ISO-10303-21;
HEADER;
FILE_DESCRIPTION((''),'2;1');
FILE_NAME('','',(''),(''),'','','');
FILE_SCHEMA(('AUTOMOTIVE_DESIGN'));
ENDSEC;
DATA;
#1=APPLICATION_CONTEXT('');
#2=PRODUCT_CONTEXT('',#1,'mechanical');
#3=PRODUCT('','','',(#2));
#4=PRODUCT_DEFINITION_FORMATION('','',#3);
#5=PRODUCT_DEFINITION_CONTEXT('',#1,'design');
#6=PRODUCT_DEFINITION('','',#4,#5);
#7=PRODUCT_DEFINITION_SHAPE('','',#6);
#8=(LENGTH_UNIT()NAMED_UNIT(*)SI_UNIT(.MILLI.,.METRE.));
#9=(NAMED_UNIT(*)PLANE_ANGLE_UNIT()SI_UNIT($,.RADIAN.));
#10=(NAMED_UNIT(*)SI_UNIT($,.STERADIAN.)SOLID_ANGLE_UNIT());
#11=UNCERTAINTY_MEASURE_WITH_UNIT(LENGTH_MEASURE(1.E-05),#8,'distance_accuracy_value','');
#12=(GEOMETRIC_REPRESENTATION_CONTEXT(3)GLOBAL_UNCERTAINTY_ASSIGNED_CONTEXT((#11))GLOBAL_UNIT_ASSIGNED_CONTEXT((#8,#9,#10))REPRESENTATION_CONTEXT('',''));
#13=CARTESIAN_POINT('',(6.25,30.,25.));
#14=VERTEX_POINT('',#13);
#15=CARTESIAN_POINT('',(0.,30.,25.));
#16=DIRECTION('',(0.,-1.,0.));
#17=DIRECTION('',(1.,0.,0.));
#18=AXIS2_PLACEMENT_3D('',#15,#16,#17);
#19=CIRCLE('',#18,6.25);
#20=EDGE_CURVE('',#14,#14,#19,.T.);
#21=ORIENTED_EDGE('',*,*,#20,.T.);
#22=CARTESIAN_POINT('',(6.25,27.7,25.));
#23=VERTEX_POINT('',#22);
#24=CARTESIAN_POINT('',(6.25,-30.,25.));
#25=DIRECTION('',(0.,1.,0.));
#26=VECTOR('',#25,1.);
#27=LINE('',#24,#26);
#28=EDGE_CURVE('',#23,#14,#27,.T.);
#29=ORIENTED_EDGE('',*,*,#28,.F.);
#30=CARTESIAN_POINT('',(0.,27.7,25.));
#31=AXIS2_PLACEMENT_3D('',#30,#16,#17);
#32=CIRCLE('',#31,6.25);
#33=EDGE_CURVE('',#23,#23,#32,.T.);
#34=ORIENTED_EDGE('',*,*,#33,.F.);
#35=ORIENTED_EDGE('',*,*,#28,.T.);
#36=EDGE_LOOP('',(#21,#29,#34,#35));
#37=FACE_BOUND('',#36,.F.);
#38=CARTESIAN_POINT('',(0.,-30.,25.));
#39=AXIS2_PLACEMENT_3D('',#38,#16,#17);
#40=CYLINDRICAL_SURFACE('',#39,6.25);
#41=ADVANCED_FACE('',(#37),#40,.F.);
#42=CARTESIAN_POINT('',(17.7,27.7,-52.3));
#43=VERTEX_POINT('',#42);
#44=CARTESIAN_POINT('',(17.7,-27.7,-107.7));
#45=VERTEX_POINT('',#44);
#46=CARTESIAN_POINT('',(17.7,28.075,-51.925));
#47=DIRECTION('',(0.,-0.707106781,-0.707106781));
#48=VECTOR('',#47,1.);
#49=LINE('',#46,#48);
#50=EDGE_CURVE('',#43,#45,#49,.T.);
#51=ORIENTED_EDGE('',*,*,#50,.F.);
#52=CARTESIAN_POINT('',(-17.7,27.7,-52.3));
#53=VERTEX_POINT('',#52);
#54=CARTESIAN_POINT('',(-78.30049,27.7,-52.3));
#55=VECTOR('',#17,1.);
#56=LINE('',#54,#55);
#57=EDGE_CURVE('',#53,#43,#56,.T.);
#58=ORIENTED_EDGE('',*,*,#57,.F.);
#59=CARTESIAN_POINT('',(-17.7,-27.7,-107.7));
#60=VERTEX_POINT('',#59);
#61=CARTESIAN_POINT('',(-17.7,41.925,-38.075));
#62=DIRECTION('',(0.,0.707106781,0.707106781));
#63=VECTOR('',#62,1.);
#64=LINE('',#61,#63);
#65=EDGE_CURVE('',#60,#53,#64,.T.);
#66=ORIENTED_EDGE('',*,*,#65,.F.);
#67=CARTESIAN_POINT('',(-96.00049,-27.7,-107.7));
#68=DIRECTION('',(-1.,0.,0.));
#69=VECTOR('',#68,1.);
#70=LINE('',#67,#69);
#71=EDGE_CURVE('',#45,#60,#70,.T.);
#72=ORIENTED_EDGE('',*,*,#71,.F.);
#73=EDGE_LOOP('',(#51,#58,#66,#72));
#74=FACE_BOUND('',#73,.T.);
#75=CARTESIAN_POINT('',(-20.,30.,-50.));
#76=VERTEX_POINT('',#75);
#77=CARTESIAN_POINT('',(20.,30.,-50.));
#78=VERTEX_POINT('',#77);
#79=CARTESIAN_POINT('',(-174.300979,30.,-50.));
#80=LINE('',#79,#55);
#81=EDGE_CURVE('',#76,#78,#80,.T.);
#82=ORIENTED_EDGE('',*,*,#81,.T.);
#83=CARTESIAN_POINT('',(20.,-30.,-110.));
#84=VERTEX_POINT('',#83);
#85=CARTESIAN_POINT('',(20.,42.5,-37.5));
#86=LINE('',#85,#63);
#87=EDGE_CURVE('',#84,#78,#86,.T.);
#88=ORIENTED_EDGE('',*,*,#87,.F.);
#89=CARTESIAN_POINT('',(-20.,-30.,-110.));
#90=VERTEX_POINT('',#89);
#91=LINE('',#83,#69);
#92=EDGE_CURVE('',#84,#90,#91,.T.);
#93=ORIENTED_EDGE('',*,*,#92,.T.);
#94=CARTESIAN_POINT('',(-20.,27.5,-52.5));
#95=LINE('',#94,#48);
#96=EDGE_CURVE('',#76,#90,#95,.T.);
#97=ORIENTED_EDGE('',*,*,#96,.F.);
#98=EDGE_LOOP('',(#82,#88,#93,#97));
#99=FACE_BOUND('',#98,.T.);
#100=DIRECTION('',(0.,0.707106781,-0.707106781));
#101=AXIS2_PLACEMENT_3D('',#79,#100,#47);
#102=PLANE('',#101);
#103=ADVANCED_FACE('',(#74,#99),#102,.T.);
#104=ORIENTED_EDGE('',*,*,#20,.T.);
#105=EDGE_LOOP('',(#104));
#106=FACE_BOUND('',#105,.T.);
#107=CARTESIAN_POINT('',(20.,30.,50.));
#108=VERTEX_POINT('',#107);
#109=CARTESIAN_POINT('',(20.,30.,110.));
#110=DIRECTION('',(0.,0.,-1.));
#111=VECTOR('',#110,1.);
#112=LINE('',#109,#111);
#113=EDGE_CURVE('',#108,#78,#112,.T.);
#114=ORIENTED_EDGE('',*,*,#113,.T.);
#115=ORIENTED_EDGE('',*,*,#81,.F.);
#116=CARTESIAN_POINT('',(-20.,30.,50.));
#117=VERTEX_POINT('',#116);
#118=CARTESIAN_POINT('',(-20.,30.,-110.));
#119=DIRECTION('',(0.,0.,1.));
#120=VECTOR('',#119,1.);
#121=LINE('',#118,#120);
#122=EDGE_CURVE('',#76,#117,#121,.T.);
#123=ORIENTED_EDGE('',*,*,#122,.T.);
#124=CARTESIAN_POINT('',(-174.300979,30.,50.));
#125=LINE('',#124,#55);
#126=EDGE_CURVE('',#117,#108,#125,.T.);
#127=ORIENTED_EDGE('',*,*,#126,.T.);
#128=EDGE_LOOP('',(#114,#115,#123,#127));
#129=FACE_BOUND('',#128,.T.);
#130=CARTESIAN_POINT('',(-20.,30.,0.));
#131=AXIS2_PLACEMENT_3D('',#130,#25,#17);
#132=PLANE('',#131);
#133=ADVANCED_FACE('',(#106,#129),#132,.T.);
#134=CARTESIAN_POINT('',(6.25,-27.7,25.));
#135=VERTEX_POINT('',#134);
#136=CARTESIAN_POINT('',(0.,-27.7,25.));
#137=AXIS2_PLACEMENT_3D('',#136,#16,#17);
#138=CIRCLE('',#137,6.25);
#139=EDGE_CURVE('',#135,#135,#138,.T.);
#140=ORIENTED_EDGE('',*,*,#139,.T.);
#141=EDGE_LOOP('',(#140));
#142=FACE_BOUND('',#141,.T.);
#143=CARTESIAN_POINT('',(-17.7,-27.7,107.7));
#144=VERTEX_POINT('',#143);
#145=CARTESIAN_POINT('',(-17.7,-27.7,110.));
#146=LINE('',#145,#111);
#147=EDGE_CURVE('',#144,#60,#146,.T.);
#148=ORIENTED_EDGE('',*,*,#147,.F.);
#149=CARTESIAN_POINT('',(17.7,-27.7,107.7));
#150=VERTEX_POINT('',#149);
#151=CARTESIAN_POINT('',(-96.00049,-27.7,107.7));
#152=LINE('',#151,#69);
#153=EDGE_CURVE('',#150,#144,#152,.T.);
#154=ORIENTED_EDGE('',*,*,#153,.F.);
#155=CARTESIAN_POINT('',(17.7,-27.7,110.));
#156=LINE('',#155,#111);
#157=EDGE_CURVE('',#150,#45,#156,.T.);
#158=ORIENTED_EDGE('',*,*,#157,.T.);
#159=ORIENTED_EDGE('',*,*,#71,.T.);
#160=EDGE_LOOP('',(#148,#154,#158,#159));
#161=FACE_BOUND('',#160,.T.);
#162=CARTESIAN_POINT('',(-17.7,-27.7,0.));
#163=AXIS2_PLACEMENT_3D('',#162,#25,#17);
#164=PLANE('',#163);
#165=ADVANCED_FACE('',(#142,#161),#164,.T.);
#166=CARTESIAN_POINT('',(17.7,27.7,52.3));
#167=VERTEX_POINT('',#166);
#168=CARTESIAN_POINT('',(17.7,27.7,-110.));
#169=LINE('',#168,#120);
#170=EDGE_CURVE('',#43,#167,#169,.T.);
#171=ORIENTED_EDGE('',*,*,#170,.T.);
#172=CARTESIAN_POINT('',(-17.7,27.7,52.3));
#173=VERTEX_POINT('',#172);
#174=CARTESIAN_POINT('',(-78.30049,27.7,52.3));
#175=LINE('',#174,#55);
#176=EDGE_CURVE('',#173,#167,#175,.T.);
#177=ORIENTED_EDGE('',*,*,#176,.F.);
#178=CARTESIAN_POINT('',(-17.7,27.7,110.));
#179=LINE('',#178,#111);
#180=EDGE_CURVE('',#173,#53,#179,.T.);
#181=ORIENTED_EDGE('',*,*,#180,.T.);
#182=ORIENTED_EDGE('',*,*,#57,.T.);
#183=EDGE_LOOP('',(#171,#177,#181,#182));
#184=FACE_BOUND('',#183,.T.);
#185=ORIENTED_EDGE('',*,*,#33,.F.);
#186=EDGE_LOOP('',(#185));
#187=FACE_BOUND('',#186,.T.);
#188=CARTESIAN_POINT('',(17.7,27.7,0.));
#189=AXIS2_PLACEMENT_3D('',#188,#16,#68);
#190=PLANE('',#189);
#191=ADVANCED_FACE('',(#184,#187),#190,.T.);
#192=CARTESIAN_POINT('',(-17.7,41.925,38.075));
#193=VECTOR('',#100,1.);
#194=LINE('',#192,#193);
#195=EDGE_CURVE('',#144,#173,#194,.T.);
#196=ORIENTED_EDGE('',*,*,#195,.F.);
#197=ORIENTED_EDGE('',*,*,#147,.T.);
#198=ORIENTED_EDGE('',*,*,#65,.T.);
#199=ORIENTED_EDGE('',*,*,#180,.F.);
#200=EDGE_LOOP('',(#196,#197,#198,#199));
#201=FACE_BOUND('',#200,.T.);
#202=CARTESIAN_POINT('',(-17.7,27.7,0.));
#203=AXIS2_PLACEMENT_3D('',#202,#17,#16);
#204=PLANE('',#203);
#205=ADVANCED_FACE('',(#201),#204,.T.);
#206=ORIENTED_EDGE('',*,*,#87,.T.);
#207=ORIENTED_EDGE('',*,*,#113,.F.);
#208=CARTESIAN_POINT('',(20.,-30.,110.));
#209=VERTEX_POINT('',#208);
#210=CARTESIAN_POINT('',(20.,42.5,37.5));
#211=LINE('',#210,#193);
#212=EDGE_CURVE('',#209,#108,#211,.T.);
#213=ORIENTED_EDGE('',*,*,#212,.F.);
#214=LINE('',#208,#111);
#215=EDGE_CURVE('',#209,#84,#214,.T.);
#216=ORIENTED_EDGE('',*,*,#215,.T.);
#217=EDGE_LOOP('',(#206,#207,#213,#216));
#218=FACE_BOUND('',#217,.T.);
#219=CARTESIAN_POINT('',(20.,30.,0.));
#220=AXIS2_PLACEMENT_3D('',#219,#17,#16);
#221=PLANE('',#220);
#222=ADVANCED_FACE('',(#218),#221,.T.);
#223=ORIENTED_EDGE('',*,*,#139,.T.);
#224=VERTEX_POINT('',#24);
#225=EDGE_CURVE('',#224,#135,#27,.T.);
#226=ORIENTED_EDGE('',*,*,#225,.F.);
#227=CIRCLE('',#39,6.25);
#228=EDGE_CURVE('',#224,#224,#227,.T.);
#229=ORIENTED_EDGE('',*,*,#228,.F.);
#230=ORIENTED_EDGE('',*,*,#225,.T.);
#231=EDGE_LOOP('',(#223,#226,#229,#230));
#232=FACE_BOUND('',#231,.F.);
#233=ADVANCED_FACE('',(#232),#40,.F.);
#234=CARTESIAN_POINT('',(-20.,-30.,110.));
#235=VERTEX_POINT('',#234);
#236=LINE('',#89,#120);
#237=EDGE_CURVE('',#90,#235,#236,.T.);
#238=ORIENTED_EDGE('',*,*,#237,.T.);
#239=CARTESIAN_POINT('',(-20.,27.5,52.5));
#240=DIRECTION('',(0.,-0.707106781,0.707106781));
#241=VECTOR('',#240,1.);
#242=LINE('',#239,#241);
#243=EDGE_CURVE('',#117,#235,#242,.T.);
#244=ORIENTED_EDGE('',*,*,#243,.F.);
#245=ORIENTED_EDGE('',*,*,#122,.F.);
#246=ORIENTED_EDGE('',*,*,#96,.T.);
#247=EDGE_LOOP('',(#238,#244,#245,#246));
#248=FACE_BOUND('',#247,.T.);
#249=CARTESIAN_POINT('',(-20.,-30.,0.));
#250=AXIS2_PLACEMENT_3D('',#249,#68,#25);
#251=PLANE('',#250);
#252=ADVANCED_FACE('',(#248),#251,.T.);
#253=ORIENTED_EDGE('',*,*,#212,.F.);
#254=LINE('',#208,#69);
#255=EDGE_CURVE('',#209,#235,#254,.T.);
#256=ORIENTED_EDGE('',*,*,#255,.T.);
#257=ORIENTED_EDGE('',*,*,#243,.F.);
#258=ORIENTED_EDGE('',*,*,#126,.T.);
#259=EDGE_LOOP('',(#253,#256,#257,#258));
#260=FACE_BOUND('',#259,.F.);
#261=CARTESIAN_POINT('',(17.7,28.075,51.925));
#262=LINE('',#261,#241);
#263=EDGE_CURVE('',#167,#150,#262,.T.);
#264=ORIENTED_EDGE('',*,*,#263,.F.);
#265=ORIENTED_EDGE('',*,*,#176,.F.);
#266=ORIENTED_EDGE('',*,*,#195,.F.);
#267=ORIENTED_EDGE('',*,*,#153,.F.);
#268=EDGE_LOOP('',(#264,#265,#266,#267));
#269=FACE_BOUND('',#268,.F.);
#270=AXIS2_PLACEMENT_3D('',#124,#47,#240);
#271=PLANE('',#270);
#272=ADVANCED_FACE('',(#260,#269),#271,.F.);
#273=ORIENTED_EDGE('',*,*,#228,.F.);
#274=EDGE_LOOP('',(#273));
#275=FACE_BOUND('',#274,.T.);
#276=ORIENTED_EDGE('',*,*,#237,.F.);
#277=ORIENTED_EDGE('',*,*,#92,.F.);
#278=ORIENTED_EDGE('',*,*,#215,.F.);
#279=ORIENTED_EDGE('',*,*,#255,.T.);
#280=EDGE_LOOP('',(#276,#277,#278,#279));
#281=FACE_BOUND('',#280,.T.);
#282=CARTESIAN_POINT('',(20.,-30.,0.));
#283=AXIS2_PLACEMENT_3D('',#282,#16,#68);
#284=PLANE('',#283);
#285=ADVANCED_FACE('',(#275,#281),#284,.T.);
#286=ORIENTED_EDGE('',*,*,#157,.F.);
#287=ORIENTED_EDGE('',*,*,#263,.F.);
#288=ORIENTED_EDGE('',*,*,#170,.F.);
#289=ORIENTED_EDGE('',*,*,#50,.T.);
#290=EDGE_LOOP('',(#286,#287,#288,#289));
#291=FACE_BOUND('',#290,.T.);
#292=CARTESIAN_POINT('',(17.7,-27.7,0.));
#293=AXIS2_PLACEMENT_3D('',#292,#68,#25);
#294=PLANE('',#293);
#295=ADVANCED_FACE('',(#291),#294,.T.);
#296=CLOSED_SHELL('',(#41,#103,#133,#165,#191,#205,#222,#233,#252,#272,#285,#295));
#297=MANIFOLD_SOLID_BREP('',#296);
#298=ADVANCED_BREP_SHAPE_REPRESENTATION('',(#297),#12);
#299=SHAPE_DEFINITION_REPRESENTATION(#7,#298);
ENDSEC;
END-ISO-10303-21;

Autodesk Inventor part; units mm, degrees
ref_plane "YZ Plane" through (0, 0, 0) normal (1, 0, 0) x (0, 1, 0)
ref_plane "XZ Plane" through (0, 0, 0) normal (0, 1, 0) x (-1, 0, 0)
ref_plane "XY Plane" through (0, 0, 0) normal (0, 0, 1) x (1, 0, 0)
sketch "スケッチ1" plane through (0, 0, 0) normal (0, 0, 1) x (1, 0, 0)
  line L0 (-20, 30) -> (20, 30)
  line L1 (20, 30) -> (20, -30)
  line L2 (20, -30) -> (-20, -30)
  line L3 (-20, -30) -> (-20, 30)
  line L4 (-20, 30) -> (20, -30) construction
  line L5 (20, 30) -> (-20, -30) construction
  line L6 (17.7, 27.7) -> (-17.7, 27.7)
  line L7 (-17.7, 27.7) -> (-17.7, -27.7)
  line L8 (-17.7, -27.7) -> (17.7, -27.7)
  line L9 (17.7, -27.7) -> (17.7, 27.7)
  point P0 (0, 0)
  dimension "d0" = 40
  dimension "d1" = 60
  dimension "d2" = 2.3
extrude "押し出し1" add sketch "スケッチ1" along normal mid plane 220
chamfer "面取り1" distance 60 angle 45 2 edges at (0, 30, 110) (0, 30, -110)
sketch "スケッチ5" plane through (-20, -30, 110) normal (0, -1, 0) x (1, 0, 0)
  circle A0 centre (20, -85) radius 6.25
  point P0 (20, -110)
  dimension "d14" = 12.5
  dimension "d17" = 25
extrude "押し出し3" cut sketch "スケッチ5" against normal blind 250
properties part number "車軸受け1"
